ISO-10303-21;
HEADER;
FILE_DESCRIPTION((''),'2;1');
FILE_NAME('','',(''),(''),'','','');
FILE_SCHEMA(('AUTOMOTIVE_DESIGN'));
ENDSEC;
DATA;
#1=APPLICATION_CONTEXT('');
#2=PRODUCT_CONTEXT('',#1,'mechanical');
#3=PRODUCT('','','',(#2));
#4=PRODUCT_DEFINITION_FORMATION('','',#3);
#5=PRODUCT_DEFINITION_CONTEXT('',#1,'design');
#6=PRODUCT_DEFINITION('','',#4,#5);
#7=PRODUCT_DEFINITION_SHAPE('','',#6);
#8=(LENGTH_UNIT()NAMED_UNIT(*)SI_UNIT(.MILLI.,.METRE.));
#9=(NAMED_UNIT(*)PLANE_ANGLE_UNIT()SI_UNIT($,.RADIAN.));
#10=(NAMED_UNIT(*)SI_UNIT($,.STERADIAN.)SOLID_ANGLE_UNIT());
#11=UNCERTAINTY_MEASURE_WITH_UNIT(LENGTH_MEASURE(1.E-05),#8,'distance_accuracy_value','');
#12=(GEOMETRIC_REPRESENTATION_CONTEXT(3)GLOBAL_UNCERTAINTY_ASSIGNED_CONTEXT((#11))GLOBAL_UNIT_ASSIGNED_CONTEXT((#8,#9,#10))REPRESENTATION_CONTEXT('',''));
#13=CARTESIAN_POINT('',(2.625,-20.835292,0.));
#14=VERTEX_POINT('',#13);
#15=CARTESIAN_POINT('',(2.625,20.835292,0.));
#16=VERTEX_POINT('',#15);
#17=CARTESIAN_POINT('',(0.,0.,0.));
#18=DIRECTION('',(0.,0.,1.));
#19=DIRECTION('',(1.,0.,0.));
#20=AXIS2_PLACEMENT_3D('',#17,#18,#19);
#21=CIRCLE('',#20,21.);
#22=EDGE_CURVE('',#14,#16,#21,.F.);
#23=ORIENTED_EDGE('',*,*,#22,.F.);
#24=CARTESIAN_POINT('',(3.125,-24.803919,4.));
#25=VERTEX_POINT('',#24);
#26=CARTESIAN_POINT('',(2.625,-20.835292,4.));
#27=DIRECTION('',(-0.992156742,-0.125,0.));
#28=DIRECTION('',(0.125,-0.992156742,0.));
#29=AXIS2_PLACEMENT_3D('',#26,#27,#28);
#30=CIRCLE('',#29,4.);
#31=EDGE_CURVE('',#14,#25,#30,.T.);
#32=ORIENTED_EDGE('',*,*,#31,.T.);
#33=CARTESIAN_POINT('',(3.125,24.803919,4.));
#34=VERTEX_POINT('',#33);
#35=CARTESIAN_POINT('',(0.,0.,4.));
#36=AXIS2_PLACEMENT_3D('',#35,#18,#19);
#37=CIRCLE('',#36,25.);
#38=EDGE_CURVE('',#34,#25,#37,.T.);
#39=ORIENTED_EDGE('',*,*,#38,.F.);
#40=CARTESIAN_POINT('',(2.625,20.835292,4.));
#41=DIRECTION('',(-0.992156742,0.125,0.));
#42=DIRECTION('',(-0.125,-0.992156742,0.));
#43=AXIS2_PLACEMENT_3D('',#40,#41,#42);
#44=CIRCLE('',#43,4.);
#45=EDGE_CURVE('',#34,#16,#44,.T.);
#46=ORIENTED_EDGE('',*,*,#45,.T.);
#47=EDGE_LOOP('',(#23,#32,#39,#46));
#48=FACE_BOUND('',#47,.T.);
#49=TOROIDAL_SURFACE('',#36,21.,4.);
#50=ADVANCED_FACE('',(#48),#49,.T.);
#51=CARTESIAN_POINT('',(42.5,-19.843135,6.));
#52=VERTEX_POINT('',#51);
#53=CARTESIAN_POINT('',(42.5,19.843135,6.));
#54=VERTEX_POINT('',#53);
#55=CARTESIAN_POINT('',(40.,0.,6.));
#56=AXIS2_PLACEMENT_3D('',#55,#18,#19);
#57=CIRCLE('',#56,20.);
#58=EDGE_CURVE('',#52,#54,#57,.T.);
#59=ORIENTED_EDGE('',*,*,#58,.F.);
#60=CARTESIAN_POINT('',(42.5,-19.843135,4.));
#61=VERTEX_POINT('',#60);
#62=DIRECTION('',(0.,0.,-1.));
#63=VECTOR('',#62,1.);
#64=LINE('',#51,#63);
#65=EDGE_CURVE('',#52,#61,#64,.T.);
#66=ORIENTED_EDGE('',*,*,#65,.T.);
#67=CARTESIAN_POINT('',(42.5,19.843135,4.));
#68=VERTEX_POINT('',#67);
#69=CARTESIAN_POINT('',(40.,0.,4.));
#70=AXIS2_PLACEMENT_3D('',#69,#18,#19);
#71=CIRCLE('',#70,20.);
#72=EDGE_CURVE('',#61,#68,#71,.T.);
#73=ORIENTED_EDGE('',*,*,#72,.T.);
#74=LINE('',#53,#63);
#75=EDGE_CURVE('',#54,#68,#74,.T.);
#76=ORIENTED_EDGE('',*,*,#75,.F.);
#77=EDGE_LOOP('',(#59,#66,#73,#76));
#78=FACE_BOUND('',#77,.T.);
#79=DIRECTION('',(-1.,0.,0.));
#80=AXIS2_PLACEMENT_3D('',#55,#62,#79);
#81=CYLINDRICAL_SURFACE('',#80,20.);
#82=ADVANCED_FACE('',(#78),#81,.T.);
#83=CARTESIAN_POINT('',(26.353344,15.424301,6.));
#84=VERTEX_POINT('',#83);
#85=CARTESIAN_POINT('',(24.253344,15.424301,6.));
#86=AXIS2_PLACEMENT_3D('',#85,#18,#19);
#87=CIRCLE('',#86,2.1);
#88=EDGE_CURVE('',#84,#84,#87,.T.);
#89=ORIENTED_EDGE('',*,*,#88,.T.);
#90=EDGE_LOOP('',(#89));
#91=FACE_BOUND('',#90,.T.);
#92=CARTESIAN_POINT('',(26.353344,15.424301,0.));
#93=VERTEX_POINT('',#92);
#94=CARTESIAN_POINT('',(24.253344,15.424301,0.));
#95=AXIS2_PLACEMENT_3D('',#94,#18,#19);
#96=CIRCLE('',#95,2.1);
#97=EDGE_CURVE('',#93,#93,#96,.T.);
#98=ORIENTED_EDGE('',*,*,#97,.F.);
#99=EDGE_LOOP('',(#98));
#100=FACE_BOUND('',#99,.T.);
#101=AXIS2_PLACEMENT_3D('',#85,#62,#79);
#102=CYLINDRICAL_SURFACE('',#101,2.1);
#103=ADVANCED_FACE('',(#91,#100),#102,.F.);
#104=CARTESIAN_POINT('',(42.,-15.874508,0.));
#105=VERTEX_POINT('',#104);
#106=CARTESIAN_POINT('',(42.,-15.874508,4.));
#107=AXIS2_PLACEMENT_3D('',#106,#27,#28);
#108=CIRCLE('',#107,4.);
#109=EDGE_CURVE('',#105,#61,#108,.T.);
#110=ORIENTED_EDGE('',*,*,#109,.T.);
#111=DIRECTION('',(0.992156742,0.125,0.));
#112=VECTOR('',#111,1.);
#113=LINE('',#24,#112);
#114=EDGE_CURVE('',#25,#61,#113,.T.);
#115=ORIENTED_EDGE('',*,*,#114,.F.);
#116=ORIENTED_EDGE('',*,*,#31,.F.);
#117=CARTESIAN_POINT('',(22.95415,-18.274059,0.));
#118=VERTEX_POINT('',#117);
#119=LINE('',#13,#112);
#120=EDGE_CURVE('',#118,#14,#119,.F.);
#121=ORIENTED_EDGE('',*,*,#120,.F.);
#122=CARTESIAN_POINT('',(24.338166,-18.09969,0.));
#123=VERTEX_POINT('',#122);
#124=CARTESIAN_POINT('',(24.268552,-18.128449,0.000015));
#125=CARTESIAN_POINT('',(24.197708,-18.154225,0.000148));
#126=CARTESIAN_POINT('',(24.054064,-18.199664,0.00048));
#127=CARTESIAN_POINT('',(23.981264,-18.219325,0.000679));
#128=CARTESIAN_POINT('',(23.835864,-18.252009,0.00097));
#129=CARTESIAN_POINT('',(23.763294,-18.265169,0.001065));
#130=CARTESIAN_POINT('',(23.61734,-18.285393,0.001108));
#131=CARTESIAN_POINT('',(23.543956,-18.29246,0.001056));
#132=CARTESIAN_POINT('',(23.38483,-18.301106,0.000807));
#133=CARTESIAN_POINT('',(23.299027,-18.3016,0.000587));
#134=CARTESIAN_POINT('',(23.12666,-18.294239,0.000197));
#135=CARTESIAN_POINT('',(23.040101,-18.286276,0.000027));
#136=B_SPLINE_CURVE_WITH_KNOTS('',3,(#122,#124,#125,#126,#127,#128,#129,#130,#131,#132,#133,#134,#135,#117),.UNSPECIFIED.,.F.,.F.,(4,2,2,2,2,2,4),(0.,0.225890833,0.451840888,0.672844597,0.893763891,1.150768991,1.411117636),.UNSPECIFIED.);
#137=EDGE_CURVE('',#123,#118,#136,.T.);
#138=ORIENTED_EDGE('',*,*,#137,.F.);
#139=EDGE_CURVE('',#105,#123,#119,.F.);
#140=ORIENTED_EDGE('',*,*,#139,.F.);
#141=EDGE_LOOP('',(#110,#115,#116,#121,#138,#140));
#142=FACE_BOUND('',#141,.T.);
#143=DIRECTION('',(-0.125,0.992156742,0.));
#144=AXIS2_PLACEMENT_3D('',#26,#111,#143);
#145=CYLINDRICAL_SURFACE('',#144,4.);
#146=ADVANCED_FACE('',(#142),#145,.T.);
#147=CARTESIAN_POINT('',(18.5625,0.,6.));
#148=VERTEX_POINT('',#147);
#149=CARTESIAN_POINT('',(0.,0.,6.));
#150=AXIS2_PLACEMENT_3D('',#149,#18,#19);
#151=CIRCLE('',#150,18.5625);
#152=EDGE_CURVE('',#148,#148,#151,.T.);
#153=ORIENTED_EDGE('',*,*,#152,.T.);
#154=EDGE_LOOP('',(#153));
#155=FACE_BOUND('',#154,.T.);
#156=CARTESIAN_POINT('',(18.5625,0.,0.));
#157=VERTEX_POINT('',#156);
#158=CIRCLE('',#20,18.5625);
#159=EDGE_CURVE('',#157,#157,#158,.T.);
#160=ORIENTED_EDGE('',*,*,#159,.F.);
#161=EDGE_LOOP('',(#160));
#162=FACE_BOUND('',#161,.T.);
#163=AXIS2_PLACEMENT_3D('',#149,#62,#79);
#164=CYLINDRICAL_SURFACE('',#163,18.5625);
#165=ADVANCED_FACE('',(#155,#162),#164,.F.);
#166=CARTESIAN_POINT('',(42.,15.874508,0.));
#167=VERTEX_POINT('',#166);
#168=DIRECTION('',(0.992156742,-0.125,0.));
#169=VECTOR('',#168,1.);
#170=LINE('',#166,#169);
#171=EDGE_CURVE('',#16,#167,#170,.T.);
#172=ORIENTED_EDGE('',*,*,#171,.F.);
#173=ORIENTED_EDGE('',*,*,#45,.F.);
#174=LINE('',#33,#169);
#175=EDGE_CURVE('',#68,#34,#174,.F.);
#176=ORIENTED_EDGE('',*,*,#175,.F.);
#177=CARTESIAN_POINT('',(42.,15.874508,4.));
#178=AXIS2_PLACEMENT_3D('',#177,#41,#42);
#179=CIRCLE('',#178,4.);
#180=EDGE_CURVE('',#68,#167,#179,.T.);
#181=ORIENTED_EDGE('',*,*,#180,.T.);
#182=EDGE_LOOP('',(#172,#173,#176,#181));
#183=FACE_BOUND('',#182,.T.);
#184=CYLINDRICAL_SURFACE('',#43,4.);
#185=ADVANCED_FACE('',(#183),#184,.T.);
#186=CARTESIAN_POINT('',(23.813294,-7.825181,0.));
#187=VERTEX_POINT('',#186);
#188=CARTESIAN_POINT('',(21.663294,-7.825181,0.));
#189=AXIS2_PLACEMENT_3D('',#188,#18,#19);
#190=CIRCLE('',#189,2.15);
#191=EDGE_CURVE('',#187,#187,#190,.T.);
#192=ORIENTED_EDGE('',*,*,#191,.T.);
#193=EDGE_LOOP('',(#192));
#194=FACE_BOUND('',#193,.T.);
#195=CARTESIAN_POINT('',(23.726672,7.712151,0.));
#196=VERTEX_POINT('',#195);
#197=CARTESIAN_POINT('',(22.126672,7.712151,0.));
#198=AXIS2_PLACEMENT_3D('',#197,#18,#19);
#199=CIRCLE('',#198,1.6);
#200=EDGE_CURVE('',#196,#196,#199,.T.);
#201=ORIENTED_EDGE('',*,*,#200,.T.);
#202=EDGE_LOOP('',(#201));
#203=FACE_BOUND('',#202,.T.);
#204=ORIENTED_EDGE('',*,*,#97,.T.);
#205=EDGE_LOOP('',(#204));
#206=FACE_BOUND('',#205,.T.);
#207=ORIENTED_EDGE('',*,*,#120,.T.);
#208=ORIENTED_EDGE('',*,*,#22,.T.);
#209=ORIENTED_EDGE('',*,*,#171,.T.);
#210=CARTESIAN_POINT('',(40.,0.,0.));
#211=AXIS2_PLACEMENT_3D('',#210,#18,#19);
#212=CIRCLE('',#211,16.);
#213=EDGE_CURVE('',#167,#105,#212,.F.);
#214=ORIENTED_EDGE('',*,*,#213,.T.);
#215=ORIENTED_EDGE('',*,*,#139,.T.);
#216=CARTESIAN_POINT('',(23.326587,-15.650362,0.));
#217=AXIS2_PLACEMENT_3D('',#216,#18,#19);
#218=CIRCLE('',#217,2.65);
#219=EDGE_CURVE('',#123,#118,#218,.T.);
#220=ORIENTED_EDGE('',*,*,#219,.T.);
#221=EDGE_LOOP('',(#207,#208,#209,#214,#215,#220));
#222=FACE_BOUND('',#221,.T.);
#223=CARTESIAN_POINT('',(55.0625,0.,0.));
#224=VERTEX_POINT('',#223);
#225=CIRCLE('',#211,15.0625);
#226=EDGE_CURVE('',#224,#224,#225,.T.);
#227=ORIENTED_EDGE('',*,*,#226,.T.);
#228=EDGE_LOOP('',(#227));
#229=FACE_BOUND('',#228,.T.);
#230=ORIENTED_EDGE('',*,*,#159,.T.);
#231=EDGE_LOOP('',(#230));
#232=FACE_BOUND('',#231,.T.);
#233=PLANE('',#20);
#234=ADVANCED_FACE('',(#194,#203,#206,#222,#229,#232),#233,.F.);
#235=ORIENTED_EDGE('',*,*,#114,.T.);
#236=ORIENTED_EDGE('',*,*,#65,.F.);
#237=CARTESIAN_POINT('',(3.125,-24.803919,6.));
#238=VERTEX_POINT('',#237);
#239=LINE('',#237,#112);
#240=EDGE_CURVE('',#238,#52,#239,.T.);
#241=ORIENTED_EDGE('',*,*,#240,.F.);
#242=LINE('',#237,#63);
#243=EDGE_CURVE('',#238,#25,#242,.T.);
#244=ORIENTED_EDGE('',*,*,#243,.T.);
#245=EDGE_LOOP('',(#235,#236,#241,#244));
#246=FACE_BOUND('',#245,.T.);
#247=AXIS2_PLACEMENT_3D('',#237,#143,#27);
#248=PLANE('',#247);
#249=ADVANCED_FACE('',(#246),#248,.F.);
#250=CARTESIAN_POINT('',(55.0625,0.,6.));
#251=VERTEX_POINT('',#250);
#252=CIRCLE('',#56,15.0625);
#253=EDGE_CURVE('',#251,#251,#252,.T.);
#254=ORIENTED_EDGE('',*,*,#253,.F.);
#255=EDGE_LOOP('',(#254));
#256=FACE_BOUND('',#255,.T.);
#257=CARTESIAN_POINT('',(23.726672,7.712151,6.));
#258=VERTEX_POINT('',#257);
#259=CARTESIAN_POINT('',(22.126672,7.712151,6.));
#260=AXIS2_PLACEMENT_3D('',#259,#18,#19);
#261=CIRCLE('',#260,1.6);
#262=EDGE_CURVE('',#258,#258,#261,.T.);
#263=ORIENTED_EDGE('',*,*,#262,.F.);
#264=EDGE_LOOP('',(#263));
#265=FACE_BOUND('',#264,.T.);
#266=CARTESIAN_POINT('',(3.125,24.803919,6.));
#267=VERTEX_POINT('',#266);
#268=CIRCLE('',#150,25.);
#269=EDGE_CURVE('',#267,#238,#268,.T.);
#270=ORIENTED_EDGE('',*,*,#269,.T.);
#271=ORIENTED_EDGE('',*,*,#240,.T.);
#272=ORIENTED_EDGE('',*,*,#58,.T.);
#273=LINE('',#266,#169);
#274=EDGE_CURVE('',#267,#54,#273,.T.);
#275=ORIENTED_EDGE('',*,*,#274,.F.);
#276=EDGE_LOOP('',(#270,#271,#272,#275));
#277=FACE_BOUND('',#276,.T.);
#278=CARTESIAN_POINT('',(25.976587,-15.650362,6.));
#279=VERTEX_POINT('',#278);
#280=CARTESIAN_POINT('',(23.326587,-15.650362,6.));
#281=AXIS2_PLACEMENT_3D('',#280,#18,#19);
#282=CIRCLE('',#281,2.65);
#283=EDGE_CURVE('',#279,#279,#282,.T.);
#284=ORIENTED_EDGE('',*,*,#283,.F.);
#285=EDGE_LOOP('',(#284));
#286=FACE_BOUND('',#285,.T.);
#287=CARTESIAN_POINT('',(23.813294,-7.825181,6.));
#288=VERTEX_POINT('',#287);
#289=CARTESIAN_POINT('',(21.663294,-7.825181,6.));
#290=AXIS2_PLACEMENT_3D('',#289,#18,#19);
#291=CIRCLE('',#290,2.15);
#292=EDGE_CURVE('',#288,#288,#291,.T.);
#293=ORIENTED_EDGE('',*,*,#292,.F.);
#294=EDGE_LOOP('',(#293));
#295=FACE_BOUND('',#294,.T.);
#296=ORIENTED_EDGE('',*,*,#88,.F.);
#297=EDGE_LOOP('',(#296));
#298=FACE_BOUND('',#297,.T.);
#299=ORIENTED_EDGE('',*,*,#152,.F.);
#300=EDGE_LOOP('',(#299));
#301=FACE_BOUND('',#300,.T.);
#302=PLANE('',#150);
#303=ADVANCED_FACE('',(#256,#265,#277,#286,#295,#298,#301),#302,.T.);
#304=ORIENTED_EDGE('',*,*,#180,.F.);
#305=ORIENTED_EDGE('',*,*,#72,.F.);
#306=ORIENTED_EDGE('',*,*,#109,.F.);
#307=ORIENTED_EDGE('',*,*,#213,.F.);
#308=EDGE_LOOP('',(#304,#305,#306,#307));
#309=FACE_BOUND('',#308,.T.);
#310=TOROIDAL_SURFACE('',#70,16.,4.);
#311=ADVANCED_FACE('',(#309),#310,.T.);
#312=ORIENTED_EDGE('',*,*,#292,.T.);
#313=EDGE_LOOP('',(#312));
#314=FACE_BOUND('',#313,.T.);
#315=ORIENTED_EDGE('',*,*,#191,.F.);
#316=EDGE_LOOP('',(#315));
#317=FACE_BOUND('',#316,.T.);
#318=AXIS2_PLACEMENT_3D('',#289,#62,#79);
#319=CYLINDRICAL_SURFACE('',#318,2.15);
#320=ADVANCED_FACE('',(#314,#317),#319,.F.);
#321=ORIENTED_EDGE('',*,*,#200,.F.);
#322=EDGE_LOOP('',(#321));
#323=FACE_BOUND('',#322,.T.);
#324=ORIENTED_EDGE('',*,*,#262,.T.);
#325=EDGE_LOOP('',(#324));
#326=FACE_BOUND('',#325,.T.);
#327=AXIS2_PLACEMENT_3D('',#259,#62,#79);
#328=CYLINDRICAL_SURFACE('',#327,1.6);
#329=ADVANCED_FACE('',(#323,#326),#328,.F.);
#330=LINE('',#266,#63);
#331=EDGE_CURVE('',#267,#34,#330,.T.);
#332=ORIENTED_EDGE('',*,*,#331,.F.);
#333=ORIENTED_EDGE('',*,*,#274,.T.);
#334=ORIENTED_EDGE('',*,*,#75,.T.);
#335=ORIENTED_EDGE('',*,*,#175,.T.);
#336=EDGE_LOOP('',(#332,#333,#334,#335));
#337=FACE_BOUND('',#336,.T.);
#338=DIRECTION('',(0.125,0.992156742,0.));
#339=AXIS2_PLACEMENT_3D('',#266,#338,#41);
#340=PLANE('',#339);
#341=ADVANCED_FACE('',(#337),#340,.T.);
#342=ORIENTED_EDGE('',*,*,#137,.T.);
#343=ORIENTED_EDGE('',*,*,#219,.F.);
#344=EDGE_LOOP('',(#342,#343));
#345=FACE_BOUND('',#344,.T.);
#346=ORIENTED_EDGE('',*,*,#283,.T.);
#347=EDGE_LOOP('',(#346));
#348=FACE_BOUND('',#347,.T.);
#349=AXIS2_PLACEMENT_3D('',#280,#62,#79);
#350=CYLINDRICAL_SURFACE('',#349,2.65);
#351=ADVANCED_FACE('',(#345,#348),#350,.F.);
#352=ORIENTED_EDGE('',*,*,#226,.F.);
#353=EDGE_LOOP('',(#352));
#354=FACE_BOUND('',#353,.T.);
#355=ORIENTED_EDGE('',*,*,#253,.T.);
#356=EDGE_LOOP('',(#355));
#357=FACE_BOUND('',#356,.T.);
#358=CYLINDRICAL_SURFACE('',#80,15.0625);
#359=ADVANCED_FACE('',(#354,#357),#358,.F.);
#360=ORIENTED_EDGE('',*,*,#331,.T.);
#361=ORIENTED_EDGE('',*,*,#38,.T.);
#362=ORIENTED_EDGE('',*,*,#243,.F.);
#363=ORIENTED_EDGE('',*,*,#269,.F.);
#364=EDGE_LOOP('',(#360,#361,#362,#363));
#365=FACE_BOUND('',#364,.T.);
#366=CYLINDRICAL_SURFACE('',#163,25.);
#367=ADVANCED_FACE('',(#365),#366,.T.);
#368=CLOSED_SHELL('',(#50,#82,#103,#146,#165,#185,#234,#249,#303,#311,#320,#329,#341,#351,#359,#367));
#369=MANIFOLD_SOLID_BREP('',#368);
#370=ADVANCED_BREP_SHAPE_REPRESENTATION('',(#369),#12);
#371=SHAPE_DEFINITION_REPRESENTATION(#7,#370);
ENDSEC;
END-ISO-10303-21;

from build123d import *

# Parameters (mm, degrees)
SKETCH1_R           = 2.15
SKETCH1_R_2         = 1.6
SKETCH1_R_3         = 2.1
SKETCH1_R_4         = 2.65
SKETCH1_R_5         = 18.5625
SKETCH1_R_6         = 15.0625
BOSS_EXTRUDE1_DEPTH = 6
FILLET1_R           = 4


with BuildPart() as part:
    # Sketch1 → Boss-Extrude1 (new body)
    with BuildSketch(Plane.XY):
        with BuildLine():
            Line((3.125, -24.803918541), (42.5, -19.843134833))
            ThreePointArc((42.5, -19.843134833), (60, 0), (42.5, 19.843134833))
            Line((42.5, 19.843134833), (3.125, 24.803918541))
            ThreePointArc((3.125, 24.803918541), (-25, 0), (3.125, -24.803918541))
        make_face()
        with Locations((21.663293527, -7.825180806)):
            Circle(SKETCH1_R, mode=Mode.SUBTRACT)
        with Locations((22.126671777, 7.712150618)):
            Circle(SKETCH1_R_2, mode=Mode.SUBTRACT)
        with Locations((24.253343554, 15.424301236)):
            Circle(SKETCH1_R_3, mode=Mode.SUBTRACT)
        with Locations((23.326587053, -15.650361612)):
            Circle(SKETCH1_R_4, mode=Mode.SUBTRACT)
        Circle(SKETCH1_R_5, mode=Mode.SUBTRACT)
        with Locations((40, 0)):
            Circle(SKETCH1_R_6, mode=Mode.SUBTRACT)
    extrude(amount=BOSS_EXTRUDE1_DEPTH)

    # Fillet1
    # the kernel refuses this fillet: 4 mm, written as the material it takes off along each edge
    with BuildSketch(Plane(origin=(0, 0, 0), x_dir=(0.12499999999999982, 0.9921567416492215, 0), z_dir=(0.9921567416492215, -0.12499999999999982, 0))) as fillet1_piece_1:
        with BuildLine():
            CenterArc((25 - FILLET1_R, FILLET1_R), FILLET1_R, 270, 90)
            Line((25 - FILLET1_R, 0), (25, 0))
            Line((25, 0), (25, FILLET1_R))
        make_face()
    revolve(axis=Axis((0, 0, 0), (0, 0, 1)), revolution_arc=194.361511563, mode=Mode.SUBTRACT)
    with BuildSketch(Plane(origin=(42.5, 19.843134833, 0), x_dir=(0, 0, 1), z_dir=(-0.9921567416492215, 0.12500000000000022, 0)), Plane(origin=(3.125, -24.803918541, 0), x_dir=(0, 0, 1), z_dir=(0.9921567416492215, 0.12500000000000014, 0))) as fillet1_piece_2:
        with BuildLine():
            CenterArc((FILLET1_R, -FILLET1_R), FILLET1_R, 90, 90)
            Line((0, -FILLET1_R), (0, 0))
            Line((0, 0), (FILLET1_R, 0))
        make_face()
    extrude(amount=39.686269666, mode=Mode.SUBTRACT)
    with BuildSketch(Plane(origin=(40, 0, 0), x_dir=(0.12499999999999938, -0.9921567416492216, 0), z_dir=(-0.9921567416492216, -0.12499999999999938, 0))) as fillet1_piece_3:
        with BuildLine():
            CenterArc((20 - FILLET1_R, FILLET1_R), FILLET1_R, 270, 90)
            Line((20 - FILLET1_R, 0), (20, 0))
            Line((20, 0), (20, FILLET1_R))
        make_face()
    revolve(axis=Axis((40, 0, 0), (0, 0, 1)), revolution_arc=165.638488437, mode=Mode.SUBTRACT)


solid = part.part
